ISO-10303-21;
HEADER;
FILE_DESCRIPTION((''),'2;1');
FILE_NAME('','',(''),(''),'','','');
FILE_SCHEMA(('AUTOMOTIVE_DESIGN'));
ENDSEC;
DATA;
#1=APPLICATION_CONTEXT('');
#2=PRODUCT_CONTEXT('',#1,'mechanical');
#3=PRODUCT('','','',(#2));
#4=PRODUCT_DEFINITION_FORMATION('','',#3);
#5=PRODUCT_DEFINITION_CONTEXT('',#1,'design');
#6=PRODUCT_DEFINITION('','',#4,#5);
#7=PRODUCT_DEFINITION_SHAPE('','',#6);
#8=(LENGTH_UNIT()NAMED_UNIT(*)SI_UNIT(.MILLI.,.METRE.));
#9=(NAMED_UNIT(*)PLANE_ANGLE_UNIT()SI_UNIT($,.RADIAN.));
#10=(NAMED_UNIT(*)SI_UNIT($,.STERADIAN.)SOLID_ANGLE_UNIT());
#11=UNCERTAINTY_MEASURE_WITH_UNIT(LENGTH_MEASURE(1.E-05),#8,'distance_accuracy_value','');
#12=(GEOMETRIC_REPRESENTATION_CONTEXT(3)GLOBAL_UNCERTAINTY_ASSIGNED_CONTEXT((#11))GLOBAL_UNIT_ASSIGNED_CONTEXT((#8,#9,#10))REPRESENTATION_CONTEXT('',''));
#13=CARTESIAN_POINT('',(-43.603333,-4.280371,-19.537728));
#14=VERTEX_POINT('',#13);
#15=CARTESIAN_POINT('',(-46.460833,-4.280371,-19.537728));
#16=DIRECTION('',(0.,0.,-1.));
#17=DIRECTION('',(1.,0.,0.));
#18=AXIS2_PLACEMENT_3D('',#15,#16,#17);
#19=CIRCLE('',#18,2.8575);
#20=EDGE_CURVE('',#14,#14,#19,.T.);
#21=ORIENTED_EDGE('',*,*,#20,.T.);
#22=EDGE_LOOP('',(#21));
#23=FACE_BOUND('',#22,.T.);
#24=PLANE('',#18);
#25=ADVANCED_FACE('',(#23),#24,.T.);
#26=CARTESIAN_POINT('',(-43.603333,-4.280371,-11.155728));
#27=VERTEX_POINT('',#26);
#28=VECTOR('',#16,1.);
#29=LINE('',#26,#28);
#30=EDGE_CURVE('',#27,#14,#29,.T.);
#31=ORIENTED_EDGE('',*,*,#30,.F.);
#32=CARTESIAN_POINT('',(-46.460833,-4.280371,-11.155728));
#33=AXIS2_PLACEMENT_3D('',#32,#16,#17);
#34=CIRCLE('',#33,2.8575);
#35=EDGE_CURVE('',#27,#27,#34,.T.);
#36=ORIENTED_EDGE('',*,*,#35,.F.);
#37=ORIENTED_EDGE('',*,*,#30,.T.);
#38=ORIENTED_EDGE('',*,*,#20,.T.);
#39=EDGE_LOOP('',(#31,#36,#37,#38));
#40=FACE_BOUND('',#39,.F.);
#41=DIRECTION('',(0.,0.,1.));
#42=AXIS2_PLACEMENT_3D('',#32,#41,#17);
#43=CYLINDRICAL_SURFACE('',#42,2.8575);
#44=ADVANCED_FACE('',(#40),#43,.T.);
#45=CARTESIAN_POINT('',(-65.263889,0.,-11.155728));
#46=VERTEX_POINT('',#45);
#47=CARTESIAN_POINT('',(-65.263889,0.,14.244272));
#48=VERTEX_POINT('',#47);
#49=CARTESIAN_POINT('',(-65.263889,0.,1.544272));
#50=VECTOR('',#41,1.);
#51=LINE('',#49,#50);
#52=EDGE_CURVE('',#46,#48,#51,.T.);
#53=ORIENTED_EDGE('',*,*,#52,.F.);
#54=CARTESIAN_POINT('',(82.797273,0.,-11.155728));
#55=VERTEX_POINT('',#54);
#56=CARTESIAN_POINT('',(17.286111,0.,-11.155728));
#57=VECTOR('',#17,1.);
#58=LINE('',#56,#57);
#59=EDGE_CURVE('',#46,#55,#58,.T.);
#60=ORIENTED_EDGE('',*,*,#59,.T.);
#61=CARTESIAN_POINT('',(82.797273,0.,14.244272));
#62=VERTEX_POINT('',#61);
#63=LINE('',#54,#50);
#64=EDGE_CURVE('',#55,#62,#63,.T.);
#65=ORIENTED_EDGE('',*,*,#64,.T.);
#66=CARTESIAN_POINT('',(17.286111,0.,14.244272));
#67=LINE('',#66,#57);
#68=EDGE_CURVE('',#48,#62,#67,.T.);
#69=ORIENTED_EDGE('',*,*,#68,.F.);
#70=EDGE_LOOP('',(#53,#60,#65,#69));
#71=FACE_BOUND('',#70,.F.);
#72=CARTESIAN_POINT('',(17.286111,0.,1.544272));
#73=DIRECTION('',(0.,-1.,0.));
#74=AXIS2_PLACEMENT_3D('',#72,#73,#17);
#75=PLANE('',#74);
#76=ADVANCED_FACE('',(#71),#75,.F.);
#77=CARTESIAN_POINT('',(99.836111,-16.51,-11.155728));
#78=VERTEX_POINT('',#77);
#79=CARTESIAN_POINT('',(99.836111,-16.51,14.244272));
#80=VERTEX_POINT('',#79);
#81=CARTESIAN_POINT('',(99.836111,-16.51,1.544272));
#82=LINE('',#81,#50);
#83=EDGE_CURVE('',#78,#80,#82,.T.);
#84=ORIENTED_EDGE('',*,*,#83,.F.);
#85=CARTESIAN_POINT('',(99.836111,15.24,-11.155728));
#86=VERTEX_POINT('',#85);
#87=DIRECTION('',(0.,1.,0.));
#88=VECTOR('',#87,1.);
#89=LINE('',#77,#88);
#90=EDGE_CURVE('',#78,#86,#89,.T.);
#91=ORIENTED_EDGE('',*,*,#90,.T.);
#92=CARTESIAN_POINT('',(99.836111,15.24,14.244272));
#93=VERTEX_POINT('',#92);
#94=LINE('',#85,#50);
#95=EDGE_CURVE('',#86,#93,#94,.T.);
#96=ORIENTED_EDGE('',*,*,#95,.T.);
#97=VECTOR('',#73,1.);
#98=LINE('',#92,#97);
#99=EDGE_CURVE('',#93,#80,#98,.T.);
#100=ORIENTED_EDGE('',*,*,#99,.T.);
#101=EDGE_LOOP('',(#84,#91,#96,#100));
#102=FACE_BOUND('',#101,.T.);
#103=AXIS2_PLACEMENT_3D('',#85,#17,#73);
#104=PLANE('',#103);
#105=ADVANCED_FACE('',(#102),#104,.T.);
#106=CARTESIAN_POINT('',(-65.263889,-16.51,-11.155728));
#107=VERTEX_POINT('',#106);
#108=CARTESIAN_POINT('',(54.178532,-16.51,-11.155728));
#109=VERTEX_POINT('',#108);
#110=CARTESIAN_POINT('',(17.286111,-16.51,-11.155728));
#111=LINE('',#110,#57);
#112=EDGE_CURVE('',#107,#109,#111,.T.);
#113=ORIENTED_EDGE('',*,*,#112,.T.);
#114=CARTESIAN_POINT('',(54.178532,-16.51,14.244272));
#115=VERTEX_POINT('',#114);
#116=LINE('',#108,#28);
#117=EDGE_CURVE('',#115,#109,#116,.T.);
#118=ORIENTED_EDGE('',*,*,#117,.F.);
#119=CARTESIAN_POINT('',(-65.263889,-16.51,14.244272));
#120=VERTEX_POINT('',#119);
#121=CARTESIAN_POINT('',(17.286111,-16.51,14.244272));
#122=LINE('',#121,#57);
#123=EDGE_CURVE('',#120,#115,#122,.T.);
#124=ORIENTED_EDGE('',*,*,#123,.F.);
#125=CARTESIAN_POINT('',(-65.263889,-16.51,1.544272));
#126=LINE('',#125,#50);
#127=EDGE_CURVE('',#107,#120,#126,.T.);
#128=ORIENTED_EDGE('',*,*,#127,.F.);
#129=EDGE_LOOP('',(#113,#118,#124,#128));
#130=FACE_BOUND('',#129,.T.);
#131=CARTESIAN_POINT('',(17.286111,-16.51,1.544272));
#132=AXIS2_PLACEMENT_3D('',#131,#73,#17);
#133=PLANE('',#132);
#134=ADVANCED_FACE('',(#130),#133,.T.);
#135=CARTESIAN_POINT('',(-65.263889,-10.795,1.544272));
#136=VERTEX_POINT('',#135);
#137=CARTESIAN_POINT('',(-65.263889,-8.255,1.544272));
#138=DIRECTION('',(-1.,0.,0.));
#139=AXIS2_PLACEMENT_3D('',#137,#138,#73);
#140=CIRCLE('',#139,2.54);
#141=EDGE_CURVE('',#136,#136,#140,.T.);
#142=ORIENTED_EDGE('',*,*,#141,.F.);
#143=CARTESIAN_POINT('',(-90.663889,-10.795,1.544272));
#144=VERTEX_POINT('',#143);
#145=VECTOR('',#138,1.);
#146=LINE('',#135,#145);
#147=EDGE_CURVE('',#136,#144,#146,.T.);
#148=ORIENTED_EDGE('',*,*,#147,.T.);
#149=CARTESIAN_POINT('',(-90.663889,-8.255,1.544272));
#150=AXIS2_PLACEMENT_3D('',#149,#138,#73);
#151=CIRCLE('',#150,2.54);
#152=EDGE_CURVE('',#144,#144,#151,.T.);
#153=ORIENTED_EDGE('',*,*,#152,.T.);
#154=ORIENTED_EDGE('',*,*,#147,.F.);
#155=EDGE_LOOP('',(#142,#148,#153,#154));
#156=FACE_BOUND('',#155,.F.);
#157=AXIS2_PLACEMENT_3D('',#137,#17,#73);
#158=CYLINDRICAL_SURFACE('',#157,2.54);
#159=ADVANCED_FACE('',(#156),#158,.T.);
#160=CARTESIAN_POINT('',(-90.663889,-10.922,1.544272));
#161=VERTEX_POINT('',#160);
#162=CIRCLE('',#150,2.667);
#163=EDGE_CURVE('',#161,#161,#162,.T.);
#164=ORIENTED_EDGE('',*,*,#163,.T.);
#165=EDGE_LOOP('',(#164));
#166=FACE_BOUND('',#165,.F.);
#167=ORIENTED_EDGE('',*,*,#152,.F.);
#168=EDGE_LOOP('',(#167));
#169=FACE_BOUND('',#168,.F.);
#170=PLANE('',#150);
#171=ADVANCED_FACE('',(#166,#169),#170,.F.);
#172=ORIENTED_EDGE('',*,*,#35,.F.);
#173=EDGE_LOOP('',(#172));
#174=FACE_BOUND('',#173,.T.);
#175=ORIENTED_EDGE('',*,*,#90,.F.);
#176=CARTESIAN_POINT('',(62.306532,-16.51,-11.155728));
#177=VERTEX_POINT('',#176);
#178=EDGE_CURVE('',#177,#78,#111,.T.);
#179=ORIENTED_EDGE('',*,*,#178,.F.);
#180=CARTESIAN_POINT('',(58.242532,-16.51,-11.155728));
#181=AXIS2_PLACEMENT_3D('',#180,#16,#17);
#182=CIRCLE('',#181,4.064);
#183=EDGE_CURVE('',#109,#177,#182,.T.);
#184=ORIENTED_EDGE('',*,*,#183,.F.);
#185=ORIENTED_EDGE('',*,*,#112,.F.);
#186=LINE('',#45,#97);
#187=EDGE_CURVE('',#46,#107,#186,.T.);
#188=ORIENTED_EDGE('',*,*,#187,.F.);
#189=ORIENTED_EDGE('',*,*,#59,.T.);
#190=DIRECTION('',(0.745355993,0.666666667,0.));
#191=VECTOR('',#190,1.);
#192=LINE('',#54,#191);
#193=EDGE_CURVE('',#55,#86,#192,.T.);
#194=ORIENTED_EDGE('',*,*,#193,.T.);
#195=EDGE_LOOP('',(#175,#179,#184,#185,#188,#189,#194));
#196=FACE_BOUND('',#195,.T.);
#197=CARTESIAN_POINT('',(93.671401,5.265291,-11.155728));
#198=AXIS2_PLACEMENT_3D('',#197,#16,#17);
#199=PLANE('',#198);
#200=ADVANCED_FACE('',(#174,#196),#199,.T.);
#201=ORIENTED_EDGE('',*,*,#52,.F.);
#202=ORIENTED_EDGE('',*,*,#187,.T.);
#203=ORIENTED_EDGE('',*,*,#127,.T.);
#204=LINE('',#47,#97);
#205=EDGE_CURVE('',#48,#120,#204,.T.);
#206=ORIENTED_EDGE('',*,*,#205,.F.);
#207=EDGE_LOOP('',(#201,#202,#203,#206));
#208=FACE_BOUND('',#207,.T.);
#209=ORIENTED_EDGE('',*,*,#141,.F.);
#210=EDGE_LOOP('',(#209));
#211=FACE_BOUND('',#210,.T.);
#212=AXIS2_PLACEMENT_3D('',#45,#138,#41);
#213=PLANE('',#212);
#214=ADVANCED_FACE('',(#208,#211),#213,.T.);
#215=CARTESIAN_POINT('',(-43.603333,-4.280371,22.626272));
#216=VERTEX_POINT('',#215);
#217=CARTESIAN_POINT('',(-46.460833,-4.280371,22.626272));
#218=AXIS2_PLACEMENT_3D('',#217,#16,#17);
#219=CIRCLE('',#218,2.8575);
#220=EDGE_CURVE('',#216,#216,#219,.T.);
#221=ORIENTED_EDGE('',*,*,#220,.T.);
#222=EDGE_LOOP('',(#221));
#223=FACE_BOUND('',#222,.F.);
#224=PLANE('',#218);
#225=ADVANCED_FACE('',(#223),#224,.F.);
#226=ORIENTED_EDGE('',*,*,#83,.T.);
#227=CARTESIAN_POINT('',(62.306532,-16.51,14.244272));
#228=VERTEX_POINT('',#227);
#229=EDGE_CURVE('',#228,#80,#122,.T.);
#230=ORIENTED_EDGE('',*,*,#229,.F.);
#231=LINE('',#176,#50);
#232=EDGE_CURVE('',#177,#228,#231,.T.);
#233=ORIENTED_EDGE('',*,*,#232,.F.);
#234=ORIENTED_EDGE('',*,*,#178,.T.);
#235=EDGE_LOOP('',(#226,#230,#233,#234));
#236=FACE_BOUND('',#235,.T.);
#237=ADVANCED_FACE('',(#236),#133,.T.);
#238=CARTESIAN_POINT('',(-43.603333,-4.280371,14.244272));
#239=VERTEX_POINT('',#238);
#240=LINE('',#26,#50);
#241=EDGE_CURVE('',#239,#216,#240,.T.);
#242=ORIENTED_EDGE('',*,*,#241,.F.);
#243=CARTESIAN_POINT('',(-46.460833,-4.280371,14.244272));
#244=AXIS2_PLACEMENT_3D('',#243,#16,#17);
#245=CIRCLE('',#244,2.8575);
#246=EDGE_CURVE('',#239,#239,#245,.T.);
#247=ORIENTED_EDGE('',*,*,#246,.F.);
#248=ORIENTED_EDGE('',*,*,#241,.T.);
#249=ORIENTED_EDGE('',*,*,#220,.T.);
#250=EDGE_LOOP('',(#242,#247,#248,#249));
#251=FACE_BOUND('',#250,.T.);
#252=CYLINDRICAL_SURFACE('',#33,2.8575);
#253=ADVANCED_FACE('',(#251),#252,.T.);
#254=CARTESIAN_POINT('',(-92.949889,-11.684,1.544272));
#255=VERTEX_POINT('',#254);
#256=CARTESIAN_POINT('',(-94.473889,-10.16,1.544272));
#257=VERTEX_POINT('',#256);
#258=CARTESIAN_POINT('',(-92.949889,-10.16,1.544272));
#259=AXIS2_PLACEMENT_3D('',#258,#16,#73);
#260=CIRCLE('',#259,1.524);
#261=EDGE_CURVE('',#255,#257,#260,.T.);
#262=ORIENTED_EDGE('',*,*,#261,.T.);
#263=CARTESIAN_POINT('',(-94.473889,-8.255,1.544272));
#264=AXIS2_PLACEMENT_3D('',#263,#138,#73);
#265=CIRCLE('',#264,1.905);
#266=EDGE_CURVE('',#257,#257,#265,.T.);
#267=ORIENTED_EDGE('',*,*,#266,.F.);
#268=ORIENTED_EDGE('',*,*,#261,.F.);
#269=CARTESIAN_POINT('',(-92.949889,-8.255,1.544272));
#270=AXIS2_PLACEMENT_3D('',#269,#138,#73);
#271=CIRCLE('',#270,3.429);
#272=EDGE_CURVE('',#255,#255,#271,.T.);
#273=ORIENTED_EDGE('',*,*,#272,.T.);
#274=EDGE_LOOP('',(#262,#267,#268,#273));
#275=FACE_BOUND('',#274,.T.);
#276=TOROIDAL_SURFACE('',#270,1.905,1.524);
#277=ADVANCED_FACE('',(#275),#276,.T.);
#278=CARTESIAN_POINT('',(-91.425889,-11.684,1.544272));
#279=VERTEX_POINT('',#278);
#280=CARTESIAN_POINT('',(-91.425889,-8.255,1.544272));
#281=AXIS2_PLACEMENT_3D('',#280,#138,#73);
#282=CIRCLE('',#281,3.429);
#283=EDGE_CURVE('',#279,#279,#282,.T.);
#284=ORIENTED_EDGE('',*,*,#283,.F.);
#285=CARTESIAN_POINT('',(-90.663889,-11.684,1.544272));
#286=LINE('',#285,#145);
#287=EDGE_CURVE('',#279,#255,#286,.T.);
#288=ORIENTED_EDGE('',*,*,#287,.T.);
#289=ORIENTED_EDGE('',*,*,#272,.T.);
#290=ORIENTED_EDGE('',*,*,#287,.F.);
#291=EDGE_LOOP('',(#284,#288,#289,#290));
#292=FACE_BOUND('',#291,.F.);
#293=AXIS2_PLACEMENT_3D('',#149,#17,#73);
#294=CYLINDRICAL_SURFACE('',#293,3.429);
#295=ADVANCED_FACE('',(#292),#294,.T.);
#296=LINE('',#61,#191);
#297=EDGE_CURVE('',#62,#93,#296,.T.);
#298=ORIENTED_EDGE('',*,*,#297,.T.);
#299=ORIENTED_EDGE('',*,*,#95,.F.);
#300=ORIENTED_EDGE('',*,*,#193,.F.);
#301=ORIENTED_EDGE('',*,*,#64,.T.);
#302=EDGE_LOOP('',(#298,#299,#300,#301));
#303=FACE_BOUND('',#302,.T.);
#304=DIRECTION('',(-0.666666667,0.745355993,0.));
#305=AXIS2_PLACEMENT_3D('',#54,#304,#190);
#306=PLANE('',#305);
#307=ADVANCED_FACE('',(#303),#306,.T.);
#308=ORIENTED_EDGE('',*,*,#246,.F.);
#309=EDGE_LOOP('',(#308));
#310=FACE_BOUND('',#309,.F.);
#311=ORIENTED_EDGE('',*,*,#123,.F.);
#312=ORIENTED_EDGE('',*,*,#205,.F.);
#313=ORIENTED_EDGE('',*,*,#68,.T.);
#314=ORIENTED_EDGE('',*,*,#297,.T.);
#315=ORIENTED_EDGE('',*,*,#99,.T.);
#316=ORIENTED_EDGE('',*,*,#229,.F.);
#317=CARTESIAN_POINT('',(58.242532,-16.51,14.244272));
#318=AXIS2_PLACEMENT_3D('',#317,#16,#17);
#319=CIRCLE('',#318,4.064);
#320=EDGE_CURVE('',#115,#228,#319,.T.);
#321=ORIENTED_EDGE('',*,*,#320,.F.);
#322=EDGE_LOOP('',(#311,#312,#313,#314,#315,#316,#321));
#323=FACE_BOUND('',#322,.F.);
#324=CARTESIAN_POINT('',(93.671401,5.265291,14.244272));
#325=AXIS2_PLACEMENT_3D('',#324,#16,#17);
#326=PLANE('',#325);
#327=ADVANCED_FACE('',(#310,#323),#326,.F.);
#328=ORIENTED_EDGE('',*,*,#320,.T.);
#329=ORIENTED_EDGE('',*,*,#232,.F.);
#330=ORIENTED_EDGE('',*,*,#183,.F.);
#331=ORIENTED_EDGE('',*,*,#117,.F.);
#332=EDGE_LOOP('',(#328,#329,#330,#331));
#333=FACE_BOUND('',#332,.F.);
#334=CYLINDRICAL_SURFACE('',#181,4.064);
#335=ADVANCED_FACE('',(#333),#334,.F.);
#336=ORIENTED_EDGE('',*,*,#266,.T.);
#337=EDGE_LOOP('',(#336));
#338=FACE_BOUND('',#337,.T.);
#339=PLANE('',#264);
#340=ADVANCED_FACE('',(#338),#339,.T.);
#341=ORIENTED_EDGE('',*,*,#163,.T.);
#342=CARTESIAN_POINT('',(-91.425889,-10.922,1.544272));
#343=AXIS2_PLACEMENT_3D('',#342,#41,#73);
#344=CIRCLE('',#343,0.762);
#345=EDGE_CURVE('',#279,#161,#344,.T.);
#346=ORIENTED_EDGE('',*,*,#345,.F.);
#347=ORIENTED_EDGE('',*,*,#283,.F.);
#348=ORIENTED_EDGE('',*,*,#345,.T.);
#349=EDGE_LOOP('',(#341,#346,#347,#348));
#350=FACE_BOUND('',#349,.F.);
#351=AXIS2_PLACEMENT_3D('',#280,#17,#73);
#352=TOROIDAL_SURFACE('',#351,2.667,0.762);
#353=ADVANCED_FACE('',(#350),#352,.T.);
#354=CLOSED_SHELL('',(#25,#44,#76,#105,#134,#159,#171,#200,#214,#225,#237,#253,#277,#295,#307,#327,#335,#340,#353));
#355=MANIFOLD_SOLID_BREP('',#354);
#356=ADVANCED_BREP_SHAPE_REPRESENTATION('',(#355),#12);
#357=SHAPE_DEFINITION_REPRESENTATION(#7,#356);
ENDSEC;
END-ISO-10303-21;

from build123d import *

# Parameters (mm, degrees)
F0_W          = 165.1
F0_H          = 25.4
F1_DEPTH      = 16.51
F3_R          = 2.8575
F4_DEPTH      = 8.382
F4_DEPTH_BACK = 33.782
F5_DEPTH      = 25.4
F6_DEPTH      = 25.4
F7_R          = 4.064
F8_DEPTH      = 25.4
F9_R          = 2.54
F10_DEPTH     = 25.4
F11_R         = 3.429
F12_DEPTH     = 3.81
F13_R         = 1.524
F14_R         = 0.762


# Not quite as in the source:
# - a feature names something its author has since deleted; it is built from what else it names


with BuildPart() as f1:
    # F0 (on Front) → F1 (new body)
    with BuildSketch(Plane.XZ):
        with Locations((17.2861106694, 1.5442719363)):
            Rectangle(F0_W, F0_H)
    extrude(amount=F1_DEPTH)

    # F3 (on face) → F4 (join, two sides)
    with BuildSketch(Plane(origin=(0, 0, -11.1557280637), x_dir=(1, 0, 0), z_dir=(0, 0, -1))) as f4_sk:
        with Locations((-46.4608334005, 4.2803706601)):
            Circle(F3_R)
    extrude(amount=F4_DEPTH)
    extrude(f4_sk.sketch, amount=-F4_DEPTH_BACK)

    # F2 (on face) → F5 (join)
    with BuildSketch(Plane(origin=(0, 0, -11.1557280637), x_dir=(1, 0, 0), z_dir=(0, 0, -1))):
        Polygon((99.8361106694, 0), (82.7972726808, 0), (99.8361106694, -15.24), align=None)
    extrude(amount=-F5_DEPTH)

    # F2 (on face) → F6 (join)
    with BuildSketch(Plane(origin=(0, 0, -11.1557280637), x_dir=(1, 0, 0), z_dir=(0, 0, -1))):
        Polygon((99.8361106694, 0), (82.7972726808, 0), (99.8361106694, -15.24), align=None)
    extrude(amount=-F6_DEPTH)

    # F7 (on face) → F8 (cut)
    with BuildSketch(Plane(origin=(0, 0, -11.1557280637), x_dir=(1, 0, 0), z_dir=(0, 0, -1))):
        with Locations((58.2425315266, 16.51)):
            Circle(F7_R)
    extrude(amount=-F8_DEPTH, mode=Mode.SUBTRACT)

    # F9 (on face) → F10 (join)
    with BuildSketch(Plane(origin=(-65.2638893306, 0, 0), x_dir=(0, -1, 0), z_dir=(-1, 0, 0))):
        with Locations((8.255, 1.5442719363)):
            Circle(F9_R)
    extrude(amount=F10_DEPTH)

    # F11 (on face) → F12 (join)
    with BuildSketch(Plane(origin=(-90.6638893306, 0, 0), x_dir=(0, -1, 0), z_dir=(-1, 0, 0))):
        with Locations((8.255, 1.5442719363)):
            Circle(F11_R)
    extrude(amount=F12_DEPTH)

    # F13
    f13_edges = [f1.edges().sort_by_distance(p)[0] for p in [
        (-94.473889, -4.826, 1.544272),
    ]]
    fillet(f13_edges, radius=F13_R)

    # F14
    f14_edges = [f1.edges().sort_by_distance(p)[0] for p in [
        (-90.663889, -4.826, 1.544272),
    ]]
    fillet(f14_edges, radius=F14_R)


solid = f1.part
